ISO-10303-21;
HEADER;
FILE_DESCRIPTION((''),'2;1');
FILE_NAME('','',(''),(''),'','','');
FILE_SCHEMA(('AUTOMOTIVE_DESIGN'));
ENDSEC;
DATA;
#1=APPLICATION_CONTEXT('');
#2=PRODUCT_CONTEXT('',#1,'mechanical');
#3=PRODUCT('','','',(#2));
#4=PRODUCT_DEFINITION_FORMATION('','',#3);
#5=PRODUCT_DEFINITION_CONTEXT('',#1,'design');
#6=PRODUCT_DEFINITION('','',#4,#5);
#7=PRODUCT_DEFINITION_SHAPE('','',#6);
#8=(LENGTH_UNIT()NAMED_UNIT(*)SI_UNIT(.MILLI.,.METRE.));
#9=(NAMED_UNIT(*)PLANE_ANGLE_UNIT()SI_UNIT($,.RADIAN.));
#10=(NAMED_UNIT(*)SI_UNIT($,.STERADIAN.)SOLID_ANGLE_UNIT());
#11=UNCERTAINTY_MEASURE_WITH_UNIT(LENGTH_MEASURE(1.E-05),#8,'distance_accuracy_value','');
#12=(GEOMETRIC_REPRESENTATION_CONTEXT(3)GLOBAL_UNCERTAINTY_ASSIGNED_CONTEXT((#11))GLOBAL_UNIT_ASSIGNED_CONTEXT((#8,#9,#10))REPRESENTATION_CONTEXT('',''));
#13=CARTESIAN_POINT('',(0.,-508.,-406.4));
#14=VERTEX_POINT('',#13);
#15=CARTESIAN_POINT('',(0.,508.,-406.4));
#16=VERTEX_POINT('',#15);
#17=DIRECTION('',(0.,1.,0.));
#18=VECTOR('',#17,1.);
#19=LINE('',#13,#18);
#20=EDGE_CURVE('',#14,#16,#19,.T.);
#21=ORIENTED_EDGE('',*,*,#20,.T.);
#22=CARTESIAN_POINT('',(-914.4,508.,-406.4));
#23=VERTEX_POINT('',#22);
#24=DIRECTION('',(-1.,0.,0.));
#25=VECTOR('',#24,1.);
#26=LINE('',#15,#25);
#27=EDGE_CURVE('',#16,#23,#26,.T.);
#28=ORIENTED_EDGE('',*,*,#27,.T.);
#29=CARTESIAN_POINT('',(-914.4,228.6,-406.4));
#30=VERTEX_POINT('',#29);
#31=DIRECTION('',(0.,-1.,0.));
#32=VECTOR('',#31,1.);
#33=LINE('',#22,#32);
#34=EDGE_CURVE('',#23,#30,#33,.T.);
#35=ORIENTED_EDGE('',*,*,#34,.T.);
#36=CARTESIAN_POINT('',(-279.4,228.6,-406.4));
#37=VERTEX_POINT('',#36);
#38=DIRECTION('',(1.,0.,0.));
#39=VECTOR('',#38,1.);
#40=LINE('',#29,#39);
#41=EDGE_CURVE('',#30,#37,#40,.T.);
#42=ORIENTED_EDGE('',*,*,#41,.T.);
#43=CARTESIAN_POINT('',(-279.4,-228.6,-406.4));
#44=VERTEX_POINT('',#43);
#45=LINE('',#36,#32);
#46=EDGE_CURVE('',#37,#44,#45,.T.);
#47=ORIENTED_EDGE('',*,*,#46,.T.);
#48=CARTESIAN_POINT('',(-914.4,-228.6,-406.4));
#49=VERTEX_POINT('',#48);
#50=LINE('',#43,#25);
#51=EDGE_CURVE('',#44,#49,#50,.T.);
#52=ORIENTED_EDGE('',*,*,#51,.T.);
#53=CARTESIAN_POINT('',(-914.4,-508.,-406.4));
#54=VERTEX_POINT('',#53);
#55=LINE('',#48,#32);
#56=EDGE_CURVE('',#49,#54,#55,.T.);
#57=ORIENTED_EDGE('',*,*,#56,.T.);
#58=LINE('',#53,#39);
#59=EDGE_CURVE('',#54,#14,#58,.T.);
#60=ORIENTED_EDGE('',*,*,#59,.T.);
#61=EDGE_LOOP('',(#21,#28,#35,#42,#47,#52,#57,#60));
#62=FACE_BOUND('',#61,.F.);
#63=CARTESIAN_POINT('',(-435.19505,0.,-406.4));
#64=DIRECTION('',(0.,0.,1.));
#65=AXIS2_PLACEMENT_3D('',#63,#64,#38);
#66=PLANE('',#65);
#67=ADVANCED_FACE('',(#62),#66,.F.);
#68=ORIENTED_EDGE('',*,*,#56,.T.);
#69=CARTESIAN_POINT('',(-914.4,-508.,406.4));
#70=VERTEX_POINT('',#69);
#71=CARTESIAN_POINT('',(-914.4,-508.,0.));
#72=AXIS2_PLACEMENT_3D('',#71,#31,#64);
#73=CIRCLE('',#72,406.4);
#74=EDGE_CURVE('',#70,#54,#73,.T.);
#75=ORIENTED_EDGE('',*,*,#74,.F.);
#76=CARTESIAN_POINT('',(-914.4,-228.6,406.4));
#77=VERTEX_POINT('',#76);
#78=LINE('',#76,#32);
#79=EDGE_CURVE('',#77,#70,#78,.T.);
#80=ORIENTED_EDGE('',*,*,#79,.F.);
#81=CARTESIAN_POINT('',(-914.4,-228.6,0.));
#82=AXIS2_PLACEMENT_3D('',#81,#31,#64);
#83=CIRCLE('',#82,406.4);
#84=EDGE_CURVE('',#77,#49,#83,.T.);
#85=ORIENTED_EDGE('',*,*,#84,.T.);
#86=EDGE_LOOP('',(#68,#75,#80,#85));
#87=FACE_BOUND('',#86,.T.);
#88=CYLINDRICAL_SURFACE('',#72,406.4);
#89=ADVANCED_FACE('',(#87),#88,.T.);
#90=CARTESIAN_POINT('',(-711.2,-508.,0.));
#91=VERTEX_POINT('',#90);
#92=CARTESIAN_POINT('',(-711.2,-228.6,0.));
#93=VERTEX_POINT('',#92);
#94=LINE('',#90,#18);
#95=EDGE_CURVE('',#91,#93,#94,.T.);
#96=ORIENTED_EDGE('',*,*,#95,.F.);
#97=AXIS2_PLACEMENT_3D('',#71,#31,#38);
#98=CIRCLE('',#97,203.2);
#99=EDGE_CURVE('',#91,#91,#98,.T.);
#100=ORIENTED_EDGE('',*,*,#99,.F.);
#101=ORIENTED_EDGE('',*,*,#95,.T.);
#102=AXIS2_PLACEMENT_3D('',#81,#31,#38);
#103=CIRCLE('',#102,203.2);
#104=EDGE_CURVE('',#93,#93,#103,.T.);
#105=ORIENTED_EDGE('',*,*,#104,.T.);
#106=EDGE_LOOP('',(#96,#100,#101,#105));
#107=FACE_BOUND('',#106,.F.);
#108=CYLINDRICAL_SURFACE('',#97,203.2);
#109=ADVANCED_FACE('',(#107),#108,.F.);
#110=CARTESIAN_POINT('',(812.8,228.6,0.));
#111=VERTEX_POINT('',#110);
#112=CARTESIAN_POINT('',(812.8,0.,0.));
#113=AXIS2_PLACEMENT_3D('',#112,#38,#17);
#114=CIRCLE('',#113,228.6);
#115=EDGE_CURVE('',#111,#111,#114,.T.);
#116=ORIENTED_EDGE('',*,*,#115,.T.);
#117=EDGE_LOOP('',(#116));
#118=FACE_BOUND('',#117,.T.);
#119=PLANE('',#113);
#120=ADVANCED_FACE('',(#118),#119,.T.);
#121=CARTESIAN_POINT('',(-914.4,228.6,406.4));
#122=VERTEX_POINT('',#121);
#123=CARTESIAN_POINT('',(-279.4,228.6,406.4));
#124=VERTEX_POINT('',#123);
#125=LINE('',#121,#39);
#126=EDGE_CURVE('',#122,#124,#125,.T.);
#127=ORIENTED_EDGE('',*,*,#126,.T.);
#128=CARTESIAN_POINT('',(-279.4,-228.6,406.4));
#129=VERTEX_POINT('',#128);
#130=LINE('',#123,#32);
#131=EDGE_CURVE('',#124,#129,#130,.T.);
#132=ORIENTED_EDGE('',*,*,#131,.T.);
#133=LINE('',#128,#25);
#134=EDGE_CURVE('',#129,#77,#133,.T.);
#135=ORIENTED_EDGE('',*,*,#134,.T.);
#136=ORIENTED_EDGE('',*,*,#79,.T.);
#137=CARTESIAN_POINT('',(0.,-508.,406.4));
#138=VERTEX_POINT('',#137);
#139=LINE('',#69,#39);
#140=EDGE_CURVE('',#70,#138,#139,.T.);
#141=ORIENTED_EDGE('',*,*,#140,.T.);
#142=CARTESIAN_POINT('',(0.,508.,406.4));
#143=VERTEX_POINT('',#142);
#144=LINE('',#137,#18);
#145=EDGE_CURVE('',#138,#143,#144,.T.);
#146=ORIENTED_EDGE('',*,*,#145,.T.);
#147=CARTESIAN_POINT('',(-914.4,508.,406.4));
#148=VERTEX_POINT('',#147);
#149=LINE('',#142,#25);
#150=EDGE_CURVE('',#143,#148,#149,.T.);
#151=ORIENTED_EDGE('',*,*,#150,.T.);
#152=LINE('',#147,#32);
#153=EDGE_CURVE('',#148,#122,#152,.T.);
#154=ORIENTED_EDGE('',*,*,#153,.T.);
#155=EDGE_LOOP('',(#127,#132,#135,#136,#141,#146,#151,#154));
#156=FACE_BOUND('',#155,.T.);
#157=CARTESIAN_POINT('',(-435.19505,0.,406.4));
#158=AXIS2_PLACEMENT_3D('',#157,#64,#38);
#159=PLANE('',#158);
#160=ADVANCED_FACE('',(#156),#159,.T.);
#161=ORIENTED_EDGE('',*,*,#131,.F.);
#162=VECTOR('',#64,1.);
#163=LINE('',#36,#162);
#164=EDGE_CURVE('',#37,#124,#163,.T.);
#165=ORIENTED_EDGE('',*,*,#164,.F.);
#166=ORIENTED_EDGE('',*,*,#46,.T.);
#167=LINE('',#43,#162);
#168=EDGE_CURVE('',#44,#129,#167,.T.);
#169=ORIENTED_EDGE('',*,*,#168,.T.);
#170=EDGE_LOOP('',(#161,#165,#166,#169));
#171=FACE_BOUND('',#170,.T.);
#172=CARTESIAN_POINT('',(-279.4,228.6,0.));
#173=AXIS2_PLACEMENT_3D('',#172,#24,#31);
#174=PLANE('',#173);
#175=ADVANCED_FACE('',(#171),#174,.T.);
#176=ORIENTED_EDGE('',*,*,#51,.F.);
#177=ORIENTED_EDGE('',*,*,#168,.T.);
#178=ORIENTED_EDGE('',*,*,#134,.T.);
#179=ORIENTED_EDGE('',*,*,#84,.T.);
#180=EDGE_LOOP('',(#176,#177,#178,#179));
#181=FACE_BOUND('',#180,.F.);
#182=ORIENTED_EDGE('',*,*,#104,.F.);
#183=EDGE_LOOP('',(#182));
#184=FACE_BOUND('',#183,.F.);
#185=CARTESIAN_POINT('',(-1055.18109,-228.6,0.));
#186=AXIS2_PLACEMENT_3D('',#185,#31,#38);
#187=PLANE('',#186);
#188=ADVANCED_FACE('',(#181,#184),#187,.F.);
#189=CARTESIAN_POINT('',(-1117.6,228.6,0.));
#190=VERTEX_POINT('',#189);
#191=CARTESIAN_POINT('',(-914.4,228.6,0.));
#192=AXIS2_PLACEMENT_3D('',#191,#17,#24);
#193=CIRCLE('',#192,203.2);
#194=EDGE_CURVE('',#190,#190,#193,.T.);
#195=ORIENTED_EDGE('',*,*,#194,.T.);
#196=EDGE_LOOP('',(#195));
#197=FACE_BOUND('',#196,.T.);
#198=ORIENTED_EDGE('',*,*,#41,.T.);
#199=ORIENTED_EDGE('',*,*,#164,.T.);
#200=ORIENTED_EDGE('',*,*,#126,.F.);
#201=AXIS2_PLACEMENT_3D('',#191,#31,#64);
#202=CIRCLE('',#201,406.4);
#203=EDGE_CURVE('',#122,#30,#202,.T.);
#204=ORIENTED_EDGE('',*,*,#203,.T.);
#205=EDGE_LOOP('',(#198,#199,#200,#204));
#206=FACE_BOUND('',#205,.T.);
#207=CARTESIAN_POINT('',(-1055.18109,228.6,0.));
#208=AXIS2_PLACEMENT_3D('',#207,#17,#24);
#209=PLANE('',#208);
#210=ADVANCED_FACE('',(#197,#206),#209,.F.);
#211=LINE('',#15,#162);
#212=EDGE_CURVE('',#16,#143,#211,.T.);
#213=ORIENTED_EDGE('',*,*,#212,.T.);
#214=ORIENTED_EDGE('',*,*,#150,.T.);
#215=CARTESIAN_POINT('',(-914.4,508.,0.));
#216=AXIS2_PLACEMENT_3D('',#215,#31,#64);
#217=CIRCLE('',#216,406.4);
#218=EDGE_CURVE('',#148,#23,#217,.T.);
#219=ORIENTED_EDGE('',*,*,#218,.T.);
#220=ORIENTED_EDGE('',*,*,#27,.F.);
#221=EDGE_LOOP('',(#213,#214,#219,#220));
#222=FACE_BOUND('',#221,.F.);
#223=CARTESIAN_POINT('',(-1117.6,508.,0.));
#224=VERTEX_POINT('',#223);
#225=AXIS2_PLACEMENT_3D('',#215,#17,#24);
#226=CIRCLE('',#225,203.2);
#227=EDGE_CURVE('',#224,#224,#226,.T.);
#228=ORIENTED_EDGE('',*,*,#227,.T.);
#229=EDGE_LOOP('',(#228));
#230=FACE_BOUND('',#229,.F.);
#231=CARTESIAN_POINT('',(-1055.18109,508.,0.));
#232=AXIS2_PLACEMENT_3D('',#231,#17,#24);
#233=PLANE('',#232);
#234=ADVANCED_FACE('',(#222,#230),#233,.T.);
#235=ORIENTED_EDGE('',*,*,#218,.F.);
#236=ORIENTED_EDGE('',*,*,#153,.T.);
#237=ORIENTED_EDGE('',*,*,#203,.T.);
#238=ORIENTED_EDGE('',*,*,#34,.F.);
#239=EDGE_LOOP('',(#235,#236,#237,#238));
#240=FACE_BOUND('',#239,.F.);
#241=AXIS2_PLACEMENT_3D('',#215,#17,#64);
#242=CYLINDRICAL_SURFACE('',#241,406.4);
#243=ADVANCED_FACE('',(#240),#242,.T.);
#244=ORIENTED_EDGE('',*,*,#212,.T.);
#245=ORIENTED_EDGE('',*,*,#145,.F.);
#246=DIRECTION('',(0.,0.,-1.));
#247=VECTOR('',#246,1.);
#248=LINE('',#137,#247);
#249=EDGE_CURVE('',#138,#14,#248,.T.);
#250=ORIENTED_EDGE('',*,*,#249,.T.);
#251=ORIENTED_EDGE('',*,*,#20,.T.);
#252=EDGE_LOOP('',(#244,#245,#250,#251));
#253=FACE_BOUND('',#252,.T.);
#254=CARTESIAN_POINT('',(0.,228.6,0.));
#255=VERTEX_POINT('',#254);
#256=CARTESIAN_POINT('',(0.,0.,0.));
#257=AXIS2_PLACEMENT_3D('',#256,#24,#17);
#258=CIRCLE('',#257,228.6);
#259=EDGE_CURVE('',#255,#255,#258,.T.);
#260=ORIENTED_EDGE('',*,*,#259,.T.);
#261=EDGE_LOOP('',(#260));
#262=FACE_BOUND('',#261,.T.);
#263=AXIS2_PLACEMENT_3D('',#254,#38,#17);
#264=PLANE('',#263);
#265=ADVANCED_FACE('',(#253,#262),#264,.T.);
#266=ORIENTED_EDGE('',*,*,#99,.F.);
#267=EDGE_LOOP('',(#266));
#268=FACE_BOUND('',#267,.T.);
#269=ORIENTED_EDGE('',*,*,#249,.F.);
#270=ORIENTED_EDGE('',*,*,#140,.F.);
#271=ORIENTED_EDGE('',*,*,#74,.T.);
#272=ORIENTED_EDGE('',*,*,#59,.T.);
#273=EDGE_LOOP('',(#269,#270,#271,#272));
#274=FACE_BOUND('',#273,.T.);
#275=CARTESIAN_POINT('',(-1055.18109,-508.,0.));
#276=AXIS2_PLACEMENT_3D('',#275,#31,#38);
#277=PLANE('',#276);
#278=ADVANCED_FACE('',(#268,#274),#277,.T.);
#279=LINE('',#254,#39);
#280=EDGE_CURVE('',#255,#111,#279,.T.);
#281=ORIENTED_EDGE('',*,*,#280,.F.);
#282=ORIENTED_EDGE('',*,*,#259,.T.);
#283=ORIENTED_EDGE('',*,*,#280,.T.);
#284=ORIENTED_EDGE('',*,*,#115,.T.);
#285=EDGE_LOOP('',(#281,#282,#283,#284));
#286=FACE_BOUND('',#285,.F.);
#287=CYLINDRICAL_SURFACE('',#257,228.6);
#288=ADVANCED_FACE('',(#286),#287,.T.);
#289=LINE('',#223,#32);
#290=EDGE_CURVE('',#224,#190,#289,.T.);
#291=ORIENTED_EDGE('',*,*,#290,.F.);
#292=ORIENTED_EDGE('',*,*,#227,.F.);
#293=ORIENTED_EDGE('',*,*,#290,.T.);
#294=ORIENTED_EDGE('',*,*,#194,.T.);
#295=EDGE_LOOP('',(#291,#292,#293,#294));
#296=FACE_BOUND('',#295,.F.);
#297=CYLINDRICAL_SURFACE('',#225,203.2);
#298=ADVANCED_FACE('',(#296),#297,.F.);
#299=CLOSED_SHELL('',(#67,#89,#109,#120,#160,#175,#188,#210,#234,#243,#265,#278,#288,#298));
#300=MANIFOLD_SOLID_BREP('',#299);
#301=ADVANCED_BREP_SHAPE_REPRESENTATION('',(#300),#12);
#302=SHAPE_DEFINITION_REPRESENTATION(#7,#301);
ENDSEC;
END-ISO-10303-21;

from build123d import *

# Parameters (mm, degrees)
F0_R      = 228.6
F1_DEPTH  = 812.8
F3_DEPTH  = 406.4
F4_DEPTH  = 406.4
F6_DEPTH  = 279.4
F8_DEPTH  = 279.4
F9_R      = 203.2
F10_DEPTH = 279.4
F11_R     = 203.2
F12_DEPTH = 279.4


# Not quite as in the source:
# - a pattern or mirror of a feature is missing from the dataset's text; its kind, count and spacing are read off the source's solid


with BuildPart() as f1:
    # F0 (on Right) → F1 (new body)
    with BuildSketch(Plane.YZ):
        Circle(F0_R)
    extrude(amount=F1_DEPTH)

    # F2 (on Top) → F3 (join)
    with BuildSketch(Plane.XY):
        Polygon((0, -508), (0, 0), (0, 508), (-914.4, 508), (-914.4, 228.6), (-279.4, 228.6), (-279.4, -228.6), (-914.4, -228.6), (-914.4, -508), align=None)
    extrude(amount=F3_DEPTH)

    # F4 (add): a face of the model
    f4_faces = [f1.faces().sort_by_distance(p)[0] for p in [
        (-13.6688820318, 368.3, 0),
    ]]
    extrude(f4_faces, amount=F4_DEPTH)

    # F5 (on face) → F6 (join)
    with BuildSketch(Plane.XZ.offset(508)):
        with BuildLine():
            Line((-914.4, -406.4), (-914.4, 406.4))
            ThreePointArc((-914.4, 406.4), (-1320.8, 0), (-914.4, -406.4))
        make_face()
    f6 = extrude(amount=-F6_DEPTH)

    # F6_copies: F6 across plane
    add(f6.mirror(Plane.ZX))

    # F7 (on face) → F8 (join)
    with BuildSketch(Plane(origin=(0, 508, 0), x_dir=(-1, 0, 0), z_dir=(0, 1, 0))):
        with BuildLine():
            ThreePointArc((914.4, -406.4), (1201.7681958742, -287.3681958742), (1320.8, 0))
            ThreePointArc((1320.8, 0), (1201.7681958742, 287.3681958742), (914.4, 406.4))
            Line((914.4, 406.4), (914.4, -406.4))
        make_face()
    extrude(amount=-F8_DEPTH)

    # F9 (on face) → F10 (cut)
    with BuildSketch(Plane.XZ.offset(508)):
        with Locations((-914.4, 0)):
            Circle(F9_R)
    extrude(amount=-F10_DEPTH, mode=Mode.SUBTRACT)

    # F11 (on face) → F12 (cut)
    with BuildSketch(Plane(origin=(0, 508, 0), x_dir=(-1, 0, 0), z_dir=(0, 1, 0))):
        with Locations((914.4, 0)):
            Circle(F11_R)
    extrude(amount=-F12_DEPTH, mode=Mode.SUBTRACT)


solid = f1.part
